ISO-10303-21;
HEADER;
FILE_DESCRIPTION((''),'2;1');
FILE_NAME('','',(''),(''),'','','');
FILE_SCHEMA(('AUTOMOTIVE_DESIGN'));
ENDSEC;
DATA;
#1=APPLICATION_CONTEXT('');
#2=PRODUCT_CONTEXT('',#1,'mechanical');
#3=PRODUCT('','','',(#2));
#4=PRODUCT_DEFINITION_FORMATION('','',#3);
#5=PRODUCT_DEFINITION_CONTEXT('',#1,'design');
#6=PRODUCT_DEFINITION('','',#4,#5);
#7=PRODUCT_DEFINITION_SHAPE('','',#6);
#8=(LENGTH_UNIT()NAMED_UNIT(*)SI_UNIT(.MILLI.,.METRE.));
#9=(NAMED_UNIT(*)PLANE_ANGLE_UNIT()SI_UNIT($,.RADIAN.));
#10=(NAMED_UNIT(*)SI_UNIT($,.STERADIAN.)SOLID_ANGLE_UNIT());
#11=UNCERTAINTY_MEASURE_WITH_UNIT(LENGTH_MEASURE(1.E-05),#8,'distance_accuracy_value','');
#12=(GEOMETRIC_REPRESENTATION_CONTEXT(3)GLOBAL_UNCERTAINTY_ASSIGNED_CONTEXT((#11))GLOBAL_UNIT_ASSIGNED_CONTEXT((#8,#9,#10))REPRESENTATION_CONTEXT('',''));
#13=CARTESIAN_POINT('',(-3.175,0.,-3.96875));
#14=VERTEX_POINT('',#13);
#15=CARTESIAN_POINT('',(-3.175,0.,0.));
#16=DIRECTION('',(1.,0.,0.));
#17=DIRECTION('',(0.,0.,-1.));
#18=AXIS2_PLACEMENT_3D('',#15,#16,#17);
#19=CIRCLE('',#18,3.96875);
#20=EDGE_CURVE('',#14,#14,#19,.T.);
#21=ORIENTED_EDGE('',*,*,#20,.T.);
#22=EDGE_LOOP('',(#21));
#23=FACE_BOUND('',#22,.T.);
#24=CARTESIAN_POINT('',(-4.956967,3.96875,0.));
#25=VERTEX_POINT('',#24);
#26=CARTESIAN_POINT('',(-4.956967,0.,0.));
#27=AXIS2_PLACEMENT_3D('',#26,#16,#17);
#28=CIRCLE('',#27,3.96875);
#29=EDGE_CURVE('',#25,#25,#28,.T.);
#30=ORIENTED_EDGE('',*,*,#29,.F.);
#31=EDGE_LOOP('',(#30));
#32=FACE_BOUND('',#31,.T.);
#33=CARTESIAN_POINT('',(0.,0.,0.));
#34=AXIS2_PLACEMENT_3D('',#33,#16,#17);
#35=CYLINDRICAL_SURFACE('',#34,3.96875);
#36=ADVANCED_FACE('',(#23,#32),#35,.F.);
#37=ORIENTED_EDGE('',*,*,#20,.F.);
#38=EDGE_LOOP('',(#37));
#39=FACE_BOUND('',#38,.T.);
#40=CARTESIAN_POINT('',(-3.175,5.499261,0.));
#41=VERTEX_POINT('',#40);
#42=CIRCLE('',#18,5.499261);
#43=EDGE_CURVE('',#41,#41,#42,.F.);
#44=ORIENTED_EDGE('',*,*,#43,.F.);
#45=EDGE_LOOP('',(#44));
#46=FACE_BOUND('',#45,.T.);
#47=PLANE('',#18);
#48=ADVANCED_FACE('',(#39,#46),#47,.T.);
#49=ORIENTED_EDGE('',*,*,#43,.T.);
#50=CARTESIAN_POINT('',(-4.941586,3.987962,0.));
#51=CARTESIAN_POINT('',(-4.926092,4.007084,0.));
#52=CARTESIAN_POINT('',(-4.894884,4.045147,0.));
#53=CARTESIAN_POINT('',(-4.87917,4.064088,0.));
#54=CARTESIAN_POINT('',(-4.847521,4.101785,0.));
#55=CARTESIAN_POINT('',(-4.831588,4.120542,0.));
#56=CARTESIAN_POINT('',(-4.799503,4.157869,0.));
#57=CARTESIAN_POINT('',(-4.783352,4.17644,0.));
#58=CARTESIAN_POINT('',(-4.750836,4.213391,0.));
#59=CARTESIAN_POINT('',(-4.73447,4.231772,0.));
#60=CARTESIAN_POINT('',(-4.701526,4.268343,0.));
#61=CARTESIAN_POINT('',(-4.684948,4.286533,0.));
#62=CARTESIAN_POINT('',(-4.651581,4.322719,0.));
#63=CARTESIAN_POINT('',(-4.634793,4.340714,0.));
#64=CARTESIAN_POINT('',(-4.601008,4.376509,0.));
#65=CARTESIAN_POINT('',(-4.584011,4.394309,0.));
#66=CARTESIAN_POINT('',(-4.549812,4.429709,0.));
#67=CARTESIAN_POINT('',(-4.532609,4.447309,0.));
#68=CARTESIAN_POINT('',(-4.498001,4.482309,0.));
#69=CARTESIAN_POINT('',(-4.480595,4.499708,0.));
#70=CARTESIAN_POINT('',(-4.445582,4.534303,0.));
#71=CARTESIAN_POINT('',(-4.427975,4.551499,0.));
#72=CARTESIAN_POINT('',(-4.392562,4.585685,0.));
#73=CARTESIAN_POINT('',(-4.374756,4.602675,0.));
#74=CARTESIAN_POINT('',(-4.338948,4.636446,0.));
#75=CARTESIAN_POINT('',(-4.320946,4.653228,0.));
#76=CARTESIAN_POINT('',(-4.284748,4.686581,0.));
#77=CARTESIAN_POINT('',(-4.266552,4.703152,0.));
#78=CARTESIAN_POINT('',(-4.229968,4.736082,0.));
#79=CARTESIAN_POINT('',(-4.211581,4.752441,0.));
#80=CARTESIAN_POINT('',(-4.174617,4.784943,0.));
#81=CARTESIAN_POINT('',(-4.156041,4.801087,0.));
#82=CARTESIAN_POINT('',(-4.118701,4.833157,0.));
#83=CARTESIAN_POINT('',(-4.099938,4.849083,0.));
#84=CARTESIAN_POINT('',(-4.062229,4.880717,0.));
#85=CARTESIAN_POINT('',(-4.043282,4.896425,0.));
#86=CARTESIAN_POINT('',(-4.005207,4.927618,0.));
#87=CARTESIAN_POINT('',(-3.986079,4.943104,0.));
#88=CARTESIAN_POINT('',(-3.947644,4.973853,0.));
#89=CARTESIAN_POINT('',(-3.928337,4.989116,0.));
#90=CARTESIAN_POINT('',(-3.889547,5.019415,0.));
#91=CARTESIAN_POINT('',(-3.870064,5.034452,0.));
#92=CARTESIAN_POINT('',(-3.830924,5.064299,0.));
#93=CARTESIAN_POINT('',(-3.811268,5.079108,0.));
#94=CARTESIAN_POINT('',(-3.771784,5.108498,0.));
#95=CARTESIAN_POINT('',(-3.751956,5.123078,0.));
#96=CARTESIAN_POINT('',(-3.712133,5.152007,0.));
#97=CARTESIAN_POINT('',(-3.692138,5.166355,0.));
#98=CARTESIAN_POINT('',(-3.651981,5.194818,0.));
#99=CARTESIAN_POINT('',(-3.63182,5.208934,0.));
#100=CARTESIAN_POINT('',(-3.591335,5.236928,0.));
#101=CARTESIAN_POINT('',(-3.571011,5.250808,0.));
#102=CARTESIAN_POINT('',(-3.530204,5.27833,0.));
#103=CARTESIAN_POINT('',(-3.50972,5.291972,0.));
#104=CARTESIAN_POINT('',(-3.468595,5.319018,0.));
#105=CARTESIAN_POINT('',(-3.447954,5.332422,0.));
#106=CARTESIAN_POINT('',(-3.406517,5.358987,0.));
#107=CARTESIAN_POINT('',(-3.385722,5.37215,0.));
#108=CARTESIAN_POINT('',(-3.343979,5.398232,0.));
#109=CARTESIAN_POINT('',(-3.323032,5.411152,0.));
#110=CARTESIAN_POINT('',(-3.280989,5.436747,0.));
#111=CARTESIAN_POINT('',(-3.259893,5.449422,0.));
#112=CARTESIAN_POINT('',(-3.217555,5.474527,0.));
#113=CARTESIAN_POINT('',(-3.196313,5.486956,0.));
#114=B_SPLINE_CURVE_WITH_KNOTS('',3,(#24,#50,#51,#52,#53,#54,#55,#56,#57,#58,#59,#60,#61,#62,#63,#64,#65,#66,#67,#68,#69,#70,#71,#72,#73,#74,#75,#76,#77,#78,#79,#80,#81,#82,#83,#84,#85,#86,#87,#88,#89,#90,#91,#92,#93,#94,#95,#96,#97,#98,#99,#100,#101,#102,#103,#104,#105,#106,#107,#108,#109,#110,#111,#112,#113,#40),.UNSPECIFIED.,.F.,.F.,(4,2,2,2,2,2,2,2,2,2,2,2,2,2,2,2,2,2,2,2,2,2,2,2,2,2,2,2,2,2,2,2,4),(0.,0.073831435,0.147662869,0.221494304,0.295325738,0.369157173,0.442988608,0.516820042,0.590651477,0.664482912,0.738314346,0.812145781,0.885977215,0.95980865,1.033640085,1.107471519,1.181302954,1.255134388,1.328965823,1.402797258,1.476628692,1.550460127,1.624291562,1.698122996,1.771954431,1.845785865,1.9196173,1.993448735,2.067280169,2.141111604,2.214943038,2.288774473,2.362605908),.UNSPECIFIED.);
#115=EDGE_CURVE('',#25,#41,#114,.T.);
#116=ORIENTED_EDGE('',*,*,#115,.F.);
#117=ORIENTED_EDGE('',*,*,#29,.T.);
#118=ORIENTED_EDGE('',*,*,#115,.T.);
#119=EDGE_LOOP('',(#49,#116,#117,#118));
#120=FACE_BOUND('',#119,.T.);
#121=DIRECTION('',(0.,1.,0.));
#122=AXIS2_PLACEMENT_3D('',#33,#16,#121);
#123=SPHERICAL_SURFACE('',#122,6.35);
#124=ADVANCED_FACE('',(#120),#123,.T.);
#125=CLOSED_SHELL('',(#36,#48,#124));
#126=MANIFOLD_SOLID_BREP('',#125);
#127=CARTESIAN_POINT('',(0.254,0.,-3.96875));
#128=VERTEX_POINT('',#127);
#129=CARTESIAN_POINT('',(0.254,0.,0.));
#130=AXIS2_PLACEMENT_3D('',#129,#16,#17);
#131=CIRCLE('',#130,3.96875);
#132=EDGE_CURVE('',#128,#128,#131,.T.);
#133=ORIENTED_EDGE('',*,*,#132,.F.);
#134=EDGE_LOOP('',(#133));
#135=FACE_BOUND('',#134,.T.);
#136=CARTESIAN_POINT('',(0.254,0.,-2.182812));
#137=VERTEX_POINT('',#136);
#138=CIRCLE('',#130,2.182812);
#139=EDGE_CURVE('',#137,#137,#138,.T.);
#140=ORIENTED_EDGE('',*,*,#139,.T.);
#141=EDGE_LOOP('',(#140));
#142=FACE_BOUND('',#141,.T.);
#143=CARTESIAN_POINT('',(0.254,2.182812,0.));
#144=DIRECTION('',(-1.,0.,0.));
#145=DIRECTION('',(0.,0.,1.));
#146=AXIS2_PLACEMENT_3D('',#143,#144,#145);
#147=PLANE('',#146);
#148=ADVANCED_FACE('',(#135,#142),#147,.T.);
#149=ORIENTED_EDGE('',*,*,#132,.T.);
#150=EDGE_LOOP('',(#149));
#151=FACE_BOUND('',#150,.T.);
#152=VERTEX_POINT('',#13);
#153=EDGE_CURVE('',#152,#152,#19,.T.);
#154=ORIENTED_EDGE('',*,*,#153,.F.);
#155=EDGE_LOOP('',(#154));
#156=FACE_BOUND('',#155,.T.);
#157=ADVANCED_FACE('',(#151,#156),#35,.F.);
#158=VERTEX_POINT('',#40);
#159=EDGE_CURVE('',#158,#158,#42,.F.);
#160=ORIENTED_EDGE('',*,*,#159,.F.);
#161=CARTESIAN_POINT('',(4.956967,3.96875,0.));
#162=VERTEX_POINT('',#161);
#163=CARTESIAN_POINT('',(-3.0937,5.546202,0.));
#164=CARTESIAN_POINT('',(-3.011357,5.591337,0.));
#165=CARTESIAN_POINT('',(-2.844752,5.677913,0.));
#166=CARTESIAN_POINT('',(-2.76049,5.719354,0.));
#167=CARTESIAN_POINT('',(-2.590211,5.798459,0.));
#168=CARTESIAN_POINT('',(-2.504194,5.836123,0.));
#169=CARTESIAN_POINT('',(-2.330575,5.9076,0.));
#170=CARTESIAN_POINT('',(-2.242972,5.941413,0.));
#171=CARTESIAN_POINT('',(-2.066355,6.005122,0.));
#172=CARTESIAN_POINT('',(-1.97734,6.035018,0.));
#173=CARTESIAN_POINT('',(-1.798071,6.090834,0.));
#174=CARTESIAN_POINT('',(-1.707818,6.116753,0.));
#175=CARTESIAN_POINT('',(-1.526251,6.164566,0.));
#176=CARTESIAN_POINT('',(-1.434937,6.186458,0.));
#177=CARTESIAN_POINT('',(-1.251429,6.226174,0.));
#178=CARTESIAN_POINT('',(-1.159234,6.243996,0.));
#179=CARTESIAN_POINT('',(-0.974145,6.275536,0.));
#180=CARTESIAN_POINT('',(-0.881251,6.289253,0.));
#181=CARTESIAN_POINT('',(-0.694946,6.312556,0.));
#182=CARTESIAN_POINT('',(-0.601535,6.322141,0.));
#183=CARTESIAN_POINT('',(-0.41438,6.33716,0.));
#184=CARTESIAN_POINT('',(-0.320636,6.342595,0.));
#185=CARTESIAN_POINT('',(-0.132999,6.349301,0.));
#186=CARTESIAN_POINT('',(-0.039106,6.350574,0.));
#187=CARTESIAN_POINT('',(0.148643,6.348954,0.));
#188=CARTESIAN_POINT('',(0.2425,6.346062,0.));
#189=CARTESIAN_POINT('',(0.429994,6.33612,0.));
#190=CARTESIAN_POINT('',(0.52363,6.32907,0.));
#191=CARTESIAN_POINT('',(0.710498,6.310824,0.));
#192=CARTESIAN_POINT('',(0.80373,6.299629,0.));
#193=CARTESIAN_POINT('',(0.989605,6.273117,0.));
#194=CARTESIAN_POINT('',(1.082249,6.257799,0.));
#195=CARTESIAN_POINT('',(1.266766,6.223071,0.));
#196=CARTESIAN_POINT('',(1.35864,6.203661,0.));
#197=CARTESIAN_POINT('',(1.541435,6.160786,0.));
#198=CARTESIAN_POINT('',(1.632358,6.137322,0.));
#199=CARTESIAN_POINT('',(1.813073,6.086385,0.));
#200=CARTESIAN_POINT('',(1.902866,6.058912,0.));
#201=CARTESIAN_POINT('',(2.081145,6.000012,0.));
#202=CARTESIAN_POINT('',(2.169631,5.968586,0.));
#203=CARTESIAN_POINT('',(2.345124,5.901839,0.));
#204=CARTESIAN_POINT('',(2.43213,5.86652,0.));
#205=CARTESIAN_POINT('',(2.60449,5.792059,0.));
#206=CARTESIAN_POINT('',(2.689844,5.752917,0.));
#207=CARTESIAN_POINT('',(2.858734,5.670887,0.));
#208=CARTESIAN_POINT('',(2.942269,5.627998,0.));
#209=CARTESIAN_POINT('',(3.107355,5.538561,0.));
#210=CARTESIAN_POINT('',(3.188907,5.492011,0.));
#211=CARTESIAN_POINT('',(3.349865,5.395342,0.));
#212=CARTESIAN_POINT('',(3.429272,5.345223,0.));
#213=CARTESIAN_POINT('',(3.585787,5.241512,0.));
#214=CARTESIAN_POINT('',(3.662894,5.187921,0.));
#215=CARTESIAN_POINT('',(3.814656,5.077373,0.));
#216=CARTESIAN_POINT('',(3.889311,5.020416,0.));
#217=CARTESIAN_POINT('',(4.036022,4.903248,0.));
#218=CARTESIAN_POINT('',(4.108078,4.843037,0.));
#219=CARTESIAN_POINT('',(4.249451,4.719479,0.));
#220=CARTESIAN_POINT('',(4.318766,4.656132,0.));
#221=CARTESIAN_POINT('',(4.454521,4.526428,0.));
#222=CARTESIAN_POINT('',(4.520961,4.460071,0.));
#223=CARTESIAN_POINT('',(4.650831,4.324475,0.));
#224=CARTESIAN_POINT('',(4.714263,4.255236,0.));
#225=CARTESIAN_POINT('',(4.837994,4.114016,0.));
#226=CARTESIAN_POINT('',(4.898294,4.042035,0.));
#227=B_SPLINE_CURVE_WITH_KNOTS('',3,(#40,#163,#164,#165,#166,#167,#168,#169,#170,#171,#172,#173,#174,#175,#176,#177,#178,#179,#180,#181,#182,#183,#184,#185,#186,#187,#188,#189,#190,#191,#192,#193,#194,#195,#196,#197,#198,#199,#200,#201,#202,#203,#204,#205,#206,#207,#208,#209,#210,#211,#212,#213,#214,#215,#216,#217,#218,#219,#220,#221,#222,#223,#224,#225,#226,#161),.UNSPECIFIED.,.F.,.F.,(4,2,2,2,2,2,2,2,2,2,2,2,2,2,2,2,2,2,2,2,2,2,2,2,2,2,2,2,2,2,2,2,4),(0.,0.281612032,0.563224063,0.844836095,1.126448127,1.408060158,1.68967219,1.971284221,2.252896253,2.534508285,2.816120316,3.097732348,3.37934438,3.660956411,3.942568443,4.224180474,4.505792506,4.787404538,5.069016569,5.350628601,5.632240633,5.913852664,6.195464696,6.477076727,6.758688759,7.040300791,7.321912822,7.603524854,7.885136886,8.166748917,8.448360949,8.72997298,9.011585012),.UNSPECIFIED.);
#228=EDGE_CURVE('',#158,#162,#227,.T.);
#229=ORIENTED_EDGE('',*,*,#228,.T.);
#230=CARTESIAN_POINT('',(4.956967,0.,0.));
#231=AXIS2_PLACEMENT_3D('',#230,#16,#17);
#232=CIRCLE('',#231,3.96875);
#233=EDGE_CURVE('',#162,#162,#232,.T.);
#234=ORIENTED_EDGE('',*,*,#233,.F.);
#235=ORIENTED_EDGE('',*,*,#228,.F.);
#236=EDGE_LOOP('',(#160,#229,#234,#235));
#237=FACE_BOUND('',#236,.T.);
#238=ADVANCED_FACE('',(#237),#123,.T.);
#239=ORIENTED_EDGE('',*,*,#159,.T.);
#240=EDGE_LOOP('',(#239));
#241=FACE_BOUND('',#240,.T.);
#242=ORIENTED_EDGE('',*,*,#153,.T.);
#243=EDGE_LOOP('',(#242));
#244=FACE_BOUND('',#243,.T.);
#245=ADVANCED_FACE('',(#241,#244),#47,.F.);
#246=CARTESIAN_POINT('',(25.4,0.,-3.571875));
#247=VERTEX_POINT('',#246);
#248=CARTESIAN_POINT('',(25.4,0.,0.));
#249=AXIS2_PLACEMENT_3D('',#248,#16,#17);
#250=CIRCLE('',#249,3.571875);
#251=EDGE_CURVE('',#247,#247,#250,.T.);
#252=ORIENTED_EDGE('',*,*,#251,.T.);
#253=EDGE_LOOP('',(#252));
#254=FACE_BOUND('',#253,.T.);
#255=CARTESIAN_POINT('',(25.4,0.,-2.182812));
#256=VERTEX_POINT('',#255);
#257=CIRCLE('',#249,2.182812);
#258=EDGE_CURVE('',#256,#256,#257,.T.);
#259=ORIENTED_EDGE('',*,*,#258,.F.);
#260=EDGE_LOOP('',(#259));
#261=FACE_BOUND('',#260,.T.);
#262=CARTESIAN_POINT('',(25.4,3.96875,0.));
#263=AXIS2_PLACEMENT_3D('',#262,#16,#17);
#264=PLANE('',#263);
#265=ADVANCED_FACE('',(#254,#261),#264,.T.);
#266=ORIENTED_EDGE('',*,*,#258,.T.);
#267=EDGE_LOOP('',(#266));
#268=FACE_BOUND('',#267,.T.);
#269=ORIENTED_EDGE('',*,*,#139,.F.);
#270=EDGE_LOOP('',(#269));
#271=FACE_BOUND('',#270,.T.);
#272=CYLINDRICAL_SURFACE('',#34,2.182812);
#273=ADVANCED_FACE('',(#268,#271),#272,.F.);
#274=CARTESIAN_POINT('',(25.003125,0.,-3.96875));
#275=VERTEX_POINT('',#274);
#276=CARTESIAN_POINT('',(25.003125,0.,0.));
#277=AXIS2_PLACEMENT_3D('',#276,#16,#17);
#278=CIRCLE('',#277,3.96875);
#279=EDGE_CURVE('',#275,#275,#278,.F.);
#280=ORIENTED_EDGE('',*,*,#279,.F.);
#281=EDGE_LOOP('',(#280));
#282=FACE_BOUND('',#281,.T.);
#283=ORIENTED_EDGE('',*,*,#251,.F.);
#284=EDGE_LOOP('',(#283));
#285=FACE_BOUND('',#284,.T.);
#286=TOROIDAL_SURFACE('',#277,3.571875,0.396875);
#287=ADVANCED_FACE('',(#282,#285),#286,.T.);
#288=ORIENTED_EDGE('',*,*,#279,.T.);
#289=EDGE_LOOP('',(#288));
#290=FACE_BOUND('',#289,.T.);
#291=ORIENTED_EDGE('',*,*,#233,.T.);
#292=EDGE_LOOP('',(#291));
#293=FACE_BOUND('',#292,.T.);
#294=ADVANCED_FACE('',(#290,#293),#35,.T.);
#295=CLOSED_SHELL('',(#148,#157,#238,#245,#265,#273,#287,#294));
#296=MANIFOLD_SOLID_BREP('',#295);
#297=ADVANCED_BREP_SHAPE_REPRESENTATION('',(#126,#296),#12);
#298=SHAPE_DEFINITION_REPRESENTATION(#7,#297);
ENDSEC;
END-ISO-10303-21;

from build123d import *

# Parameters (mm, degrees)
FILLET2_R = 0.396875


# Read off the part's stored shape, not the designer's step: Split2
with BuildPart() as part:
    # Sketch1 → Revolve1 (revolve)
    with BuildSketch(Plane.XY, mode=Mode.PRIVATE) as revolve1_sk:
        with BuildLine():
            Line((0.254, 3.96875), (-4.956967161, 3.96875))
            ThreePointArc((-4.956967161, 3.96875), (0, 6.35), (4.956967161, 3.96875))
            Line((4.956967161, 3.96875), (25.4, 3.96875))
            Line((25.4, 3.96875), (25.4, 2.1828125))
            Line((25.4, 2.1828125), (0.254, 2.1828125))
            Line((0.254, 2.1828125), (0.254, 3.96875))
        make_face()
    revolve(revolve1_sk.sketch.rotate(Axis((0, 0, 0), (-1, 0, 0)), 90), axis=Axis((0, 0, 0), (-1, 0, 0)))

    # Fillet2
    fillet2_edges = [part.edges().sort_by_distance(p)[0] for p in [
        (25.4, 0, 3.96875),
    ]]
    fillet(fillet2_edges, radius=FILLET2_R)


with BuildPart() as body_2:
    # Split2: the piece on the far side of the plane
    add(part.part)
    split(bisect_by=Plane.YZ.offset(-3.175), keep=Keep.BOTTOM)


with BuildPart() as part_1:
    add(part.part)

    # Split2
    split(bisect_by=Plane.YZ.offset(-3.175), keep=Keep.TOP)


solid = Compound([body_2.part, part_1.part])
